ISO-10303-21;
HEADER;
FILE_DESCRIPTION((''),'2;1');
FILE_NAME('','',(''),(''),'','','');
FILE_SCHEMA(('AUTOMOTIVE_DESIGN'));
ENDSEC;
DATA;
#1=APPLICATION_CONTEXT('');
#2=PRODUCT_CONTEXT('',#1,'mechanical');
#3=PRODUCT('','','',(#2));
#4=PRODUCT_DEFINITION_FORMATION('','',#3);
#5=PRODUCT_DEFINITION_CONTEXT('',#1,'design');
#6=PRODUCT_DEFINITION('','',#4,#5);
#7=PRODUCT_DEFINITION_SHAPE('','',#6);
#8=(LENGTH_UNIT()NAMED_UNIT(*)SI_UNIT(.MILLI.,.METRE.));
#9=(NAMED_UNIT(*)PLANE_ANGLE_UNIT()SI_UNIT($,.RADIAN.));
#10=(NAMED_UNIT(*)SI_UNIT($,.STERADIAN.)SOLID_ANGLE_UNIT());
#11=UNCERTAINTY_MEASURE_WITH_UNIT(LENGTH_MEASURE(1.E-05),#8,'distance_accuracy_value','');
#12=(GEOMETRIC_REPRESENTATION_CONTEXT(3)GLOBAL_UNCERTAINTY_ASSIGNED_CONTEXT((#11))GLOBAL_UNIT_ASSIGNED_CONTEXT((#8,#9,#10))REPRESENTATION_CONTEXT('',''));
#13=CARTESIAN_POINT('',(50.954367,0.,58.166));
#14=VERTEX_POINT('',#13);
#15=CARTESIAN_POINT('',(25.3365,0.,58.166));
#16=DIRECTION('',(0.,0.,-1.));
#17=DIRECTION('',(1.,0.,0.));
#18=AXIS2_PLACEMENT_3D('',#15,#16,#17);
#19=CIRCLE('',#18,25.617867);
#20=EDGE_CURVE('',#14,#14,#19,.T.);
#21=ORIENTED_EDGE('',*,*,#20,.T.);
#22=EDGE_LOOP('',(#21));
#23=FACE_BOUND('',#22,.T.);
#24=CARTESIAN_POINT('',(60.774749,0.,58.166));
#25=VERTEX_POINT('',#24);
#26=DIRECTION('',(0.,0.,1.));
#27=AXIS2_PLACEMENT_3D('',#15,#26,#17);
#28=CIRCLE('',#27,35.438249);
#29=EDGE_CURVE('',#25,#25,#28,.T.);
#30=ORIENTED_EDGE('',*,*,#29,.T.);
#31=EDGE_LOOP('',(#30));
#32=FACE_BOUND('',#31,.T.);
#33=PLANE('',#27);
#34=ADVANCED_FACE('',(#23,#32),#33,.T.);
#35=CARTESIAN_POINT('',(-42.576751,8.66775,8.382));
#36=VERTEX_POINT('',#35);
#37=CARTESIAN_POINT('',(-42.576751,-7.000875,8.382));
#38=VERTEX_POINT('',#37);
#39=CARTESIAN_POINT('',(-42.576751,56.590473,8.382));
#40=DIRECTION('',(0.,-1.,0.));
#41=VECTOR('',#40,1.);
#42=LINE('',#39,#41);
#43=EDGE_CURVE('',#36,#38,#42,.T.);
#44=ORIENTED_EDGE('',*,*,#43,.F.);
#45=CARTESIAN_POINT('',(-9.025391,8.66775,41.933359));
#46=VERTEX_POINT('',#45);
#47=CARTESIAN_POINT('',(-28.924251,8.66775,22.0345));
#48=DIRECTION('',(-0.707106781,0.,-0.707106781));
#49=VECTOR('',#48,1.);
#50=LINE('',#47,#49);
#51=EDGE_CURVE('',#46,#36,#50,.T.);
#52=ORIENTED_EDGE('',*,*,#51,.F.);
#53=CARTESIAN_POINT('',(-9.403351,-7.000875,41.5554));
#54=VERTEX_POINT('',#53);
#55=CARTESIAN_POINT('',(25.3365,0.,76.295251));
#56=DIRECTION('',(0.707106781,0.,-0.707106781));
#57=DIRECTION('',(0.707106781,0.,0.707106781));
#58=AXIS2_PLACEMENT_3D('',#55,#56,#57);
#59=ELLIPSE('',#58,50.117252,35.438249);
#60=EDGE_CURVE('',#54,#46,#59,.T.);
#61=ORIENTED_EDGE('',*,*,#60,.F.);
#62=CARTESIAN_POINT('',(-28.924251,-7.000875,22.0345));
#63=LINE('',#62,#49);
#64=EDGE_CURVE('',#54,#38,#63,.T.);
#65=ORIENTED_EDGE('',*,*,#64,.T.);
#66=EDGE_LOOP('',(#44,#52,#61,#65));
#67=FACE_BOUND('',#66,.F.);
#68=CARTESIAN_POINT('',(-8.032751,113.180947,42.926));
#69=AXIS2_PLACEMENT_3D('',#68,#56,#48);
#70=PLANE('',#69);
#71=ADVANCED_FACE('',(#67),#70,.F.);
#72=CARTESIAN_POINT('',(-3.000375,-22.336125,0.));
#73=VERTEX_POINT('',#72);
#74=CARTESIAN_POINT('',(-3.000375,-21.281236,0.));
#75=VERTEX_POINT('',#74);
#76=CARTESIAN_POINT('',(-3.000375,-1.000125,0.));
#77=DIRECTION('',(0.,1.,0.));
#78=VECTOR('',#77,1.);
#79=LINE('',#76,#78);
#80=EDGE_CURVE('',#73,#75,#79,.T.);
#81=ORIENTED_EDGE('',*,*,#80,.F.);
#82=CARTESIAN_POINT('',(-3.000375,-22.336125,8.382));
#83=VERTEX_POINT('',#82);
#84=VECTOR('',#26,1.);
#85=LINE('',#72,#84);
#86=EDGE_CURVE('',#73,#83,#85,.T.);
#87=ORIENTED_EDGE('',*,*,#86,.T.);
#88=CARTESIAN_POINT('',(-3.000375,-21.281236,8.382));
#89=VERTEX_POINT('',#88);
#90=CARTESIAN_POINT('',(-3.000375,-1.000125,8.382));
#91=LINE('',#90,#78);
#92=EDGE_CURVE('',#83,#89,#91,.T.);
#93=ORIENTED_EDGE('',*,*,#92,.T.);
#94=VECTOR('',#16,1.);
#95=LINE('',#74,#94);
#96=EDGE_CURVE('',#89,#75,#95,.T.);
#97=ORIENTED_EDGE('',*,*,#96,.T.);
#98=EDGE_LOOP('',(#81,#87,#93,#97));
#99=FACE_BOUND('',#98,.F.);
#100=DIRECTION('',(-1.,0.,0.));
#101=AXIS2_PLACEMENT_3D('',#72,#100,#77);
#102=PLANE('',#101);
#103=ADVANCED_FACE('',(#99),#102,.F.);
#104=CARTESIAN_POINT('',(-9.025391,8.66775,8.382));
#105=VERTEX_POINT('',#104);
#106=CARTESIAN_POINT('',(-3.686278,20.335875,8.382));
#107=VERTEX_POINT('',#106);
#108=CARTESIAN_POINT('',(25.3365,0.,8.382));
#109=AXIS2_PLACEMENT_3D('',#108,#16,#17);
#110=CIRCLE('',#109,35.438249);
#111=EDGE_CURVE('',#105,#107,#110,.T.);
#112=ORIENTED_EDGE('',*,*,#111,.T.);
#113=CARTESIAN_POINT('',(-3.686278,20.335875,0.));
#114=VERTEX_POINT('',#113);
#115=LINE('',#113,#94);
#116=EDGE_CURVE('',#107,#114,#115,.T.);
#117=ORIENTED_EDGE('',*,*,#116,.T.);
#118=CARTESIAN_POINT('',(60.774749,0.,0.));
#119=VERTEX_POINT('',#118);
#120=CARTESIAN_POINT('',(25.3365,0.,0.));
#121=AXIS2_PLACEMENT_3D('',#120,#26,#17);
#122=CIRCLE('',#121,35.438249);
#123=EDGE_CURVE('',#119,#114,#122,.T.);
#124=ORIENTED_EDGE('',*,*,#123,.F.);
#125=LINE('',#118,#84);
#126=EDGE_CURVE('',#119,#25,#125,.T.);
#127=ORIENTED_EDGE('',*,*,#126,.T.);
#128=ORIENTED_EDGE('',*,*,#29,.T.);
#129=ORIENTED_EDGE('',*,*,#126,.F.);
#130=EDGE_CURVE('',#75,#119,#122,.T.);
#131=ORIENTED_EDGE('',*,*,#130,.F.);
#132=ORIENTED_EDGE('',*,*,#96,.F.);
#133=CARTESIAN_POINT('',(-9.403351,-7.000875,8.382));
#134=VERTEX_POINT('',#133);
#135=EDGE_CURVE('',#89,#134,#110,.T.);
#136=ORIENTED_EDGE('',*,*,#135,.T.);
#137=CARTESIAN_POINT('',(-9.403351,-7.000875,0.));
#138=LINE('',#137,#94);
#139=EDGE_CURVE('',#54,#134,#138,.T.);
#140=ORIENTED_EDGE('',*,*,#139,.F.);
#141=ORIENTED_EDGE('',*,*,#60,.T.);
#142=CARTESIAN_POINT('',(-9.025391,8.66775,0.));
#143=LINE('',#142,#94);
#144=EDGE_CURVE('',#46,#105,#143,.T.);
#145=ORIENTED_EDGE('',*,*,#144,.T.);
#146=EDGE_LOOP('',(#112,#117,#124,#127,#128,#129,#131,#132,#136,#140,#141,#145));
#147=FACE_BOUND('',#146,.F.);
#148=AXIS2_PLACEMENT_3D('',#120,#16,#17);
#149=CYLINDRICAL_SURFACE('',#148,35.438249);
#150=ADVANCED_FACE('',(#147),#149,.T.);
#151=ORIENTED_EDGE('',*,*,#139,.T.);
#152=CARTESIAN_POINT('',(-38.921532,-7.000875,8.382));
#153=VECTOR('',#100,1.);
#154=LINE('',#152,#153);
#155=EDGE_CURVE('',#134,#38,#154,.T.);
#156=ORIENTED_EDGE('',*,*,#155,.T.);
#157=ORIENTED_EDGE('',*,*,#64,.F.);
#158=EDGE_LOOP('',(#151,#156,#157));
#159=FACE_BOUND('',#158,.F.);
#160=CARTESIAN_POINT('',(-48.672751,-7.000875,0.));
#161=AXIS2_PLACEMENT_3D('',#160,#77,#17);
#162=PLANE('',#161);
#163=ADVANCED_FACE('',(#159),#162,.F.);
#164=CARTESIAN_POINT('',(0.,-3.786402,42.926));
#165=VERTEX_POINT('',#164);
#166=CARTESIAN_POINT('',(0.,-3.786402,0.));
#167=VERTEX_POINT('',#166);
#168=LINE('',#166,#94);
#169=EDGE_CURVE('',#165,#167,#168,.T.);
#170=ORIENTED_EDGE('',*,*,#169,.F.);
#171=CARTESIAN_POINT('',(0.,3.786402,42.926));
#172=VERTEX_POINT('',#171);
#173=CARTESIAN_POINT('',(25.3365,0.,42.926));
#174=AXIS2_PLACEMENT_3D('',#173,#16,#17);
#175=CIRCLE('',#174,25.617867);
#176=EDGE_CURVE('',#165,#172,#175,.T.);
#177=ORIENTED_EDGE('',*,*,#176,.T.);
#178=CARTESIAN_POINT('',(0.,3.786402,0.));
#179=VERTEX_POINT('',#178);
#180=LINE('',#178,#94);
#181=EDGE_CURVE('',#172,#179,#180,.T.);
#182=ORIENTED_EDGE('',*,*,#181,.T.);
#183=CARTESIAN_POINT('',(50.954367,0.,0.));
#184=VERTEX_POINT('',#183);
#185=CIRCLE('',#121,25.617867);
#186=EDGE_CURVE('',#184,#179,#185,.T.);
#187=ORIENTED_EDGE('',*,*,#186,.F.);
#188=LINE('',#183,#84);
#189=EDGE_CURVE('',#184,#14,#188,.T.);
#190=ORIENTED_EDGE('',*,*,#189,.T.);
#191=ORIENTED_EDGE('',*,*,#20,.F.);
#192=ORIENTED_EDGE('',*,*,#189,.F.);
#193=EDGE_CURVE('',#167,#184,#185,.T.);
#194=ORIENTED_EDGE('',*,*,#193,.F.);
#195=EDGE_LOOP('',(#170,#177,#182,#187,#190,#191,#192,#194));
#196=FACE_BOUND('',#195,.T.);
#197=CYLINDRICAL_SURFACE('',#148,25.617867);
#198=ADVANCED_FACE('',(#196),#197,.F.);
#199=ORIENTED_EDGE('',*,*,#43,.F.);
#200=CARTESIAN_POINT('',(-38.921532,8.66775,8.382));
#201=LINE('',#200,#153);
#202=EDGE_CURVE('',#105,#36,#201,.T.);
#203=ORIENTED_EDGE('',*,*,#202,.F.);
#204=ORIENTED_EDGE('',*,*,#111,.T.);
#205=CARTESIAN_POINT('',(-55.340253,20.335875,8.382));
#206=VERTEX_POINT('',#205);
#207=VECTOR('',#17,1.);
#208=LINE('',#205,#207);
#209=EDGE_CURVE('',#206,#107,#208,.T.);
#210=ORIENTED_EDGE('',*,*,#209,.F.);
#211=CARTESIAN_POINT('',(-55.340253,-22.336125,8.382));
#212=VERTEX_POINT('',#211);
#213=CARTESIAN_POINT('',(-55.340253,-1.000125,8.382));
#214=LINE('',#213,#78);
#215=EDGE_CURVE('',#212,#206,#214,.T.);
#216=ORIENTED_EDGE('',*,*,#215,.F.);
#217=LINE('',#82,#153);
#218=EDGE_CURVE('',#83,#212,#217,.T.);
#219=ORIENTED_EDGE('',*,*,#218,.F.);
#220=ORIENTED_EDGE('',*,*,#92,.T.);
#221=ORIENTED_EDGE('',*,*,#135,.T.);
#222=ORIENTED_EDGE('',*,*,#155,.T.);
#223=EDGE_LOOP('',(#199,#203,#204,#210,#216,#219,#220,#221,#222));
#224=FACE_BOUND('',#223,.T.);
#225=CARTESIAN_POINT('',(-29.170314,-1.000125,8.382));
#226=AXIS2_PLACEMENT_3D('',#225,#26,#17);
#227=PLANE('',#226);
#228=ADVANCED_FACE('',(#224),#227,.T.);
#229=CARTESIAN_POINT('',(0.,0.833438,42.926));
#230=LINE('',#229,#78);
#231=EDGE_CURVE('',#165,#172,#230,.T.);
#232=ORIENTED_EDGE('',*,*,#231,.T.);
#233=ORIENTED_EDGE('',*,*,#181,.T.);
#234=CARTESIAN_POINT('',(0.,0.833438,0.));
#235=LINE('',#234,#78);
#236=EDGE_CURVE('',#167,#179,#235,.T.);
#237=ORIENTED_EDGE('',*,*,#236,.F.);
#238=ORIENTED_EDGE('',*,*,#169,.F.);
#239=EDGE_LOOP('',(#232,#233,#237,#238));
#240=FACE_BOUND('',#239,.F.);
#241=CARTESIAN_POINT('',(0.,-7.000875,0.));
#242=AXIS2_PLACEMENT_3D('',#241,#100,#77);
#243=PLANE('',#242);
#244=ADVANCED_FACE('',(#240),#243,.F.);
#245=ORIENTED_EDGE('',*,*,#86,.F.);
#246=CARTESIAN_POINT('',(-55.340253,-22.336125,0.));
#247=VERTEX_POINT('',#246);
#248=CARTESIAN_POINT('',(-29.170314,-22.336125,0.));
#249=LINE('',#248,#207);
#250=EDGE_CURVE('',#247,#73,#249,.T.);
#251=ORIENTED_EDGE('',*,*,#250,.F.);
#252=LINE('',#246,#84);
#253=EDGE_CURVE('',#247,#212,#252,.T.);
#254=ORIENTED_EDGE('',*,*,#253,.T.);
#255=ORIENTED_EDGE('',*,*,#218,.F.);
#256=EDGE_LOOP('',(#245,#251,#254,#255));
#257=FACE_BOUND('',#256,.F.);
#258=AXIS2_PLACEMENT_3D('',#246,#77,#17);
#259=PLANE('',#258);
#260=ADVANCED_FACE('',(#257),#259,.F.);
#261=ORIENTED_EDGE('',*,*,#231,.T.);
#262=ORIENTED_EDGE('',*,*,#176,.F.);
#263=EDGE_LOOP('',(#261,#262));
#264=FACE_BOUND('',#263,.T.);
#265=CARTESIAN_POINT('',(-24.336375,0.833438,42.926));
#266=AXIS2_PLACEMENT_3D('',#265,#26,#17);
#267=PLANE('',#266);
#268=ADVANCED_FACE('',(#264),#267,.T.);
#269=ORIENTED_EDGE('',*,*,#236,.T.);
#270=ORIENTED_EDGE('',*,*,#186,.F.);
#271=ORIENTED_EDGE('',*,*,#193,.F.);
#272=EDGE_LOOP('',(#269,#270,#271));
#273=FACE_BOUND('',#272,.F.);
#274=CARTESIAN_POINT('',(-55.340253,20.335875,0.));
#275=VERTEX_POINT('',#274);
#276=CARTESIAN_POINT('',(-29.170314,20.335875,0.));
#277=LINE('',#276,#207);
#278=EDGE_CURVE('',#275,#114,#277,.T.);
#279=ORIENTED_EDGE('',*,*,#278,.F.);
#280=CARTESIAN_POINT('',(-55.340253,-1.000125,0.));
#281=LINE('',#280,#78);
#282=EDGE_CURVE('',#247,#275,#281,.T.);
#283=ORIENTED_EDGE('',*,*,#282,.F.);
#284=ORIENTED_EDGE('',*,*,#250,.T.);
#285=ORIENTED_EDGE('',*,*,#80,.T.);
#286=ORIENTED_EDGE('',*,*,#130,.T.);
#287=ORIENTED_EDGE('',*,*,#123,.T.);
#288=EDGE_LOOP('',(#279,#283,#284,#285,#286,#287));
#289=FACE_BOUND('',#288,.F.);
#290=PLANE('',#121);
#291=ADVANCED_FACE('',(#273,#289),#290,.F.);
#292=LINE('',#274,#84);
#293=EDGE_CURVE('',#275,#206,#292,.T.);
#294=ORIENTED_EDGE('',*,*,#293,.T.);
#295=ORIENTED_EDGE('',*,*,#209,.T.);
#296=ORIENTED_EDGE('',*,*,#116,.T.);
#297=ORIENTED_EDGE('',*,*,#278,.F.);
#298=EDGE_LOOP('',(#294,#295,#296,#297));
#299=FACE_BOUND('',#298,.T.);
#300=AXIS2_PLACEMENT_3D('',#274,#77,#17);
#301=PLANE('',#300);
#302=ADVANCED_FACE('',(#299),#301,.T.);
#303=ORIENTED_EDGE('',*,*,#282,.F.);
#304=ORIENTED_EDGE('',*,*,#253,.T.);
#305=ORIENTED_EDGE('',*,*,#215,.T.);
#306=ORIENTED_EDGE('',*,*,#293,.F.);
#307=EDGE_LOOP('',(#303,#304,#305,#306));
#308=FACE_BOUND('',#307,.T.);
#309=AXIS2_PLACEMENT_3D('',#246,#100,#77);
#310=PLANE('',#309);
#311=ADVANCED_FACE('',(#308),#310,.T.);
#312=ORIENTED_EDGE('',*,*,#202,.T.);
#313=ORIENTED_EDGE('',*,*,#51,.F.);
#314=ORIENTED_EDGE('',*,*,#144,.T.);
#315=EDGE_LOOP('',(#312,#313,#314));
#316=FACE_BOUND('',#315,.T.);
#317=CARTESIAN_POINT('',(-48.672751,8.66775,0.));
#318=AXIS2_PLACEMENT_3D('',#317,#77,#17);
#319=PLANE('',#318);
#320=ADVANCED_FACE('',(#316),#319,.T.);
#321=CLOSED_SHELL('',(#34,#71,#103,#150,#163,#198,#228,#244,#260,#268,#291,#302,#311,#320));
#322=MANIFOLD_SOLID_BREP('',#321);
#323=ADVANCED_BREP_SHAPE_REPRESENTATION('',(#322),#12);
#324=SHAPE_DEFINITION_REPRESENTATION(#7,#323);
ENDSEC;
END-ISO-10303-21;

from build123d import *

# Parameters (mm, degrees)
F0_W        = 52.3398779333
F0_H        = 42.6720008254
F1_DEPTH    = 8.382
F2_R        = 35.438248993
F3_DEPTH    = 58.166
F4_R        = 25.617866598
F5_DEPTH    = 76.454
F6_W        = 48.6727505922
F6_H        = 15.6686254777
F7_DEPTH    = 42.926
F8_T4_DEPTH = 224.6950187396
F8_S5_R     = 35.438248993
F8_T6_DEPTH = 117


# Not quite as in the source:
# - a fillet or chamfer that OpenCascade refuses, or shapes differently, is made with other operations: its cross-section is extruded or revolved along the edge and cut away or added


with BuildPart() as f1:
    # F0 (on Top) → F1 (new body)
    with BuildSketch(Plane.XY):
        with Locations((-29.17031385, -1.0001249611)):
            Rectangle(F0_W, F0_H)
    extrude(amount=F1_DEPTH)

    # F2 (on Top) → F3 (join)
    with BuildSketch(Plane.XY):
        with Locations((25.3365002573, 0)):
            Circle(F2_R)
    extrude(amount=F3_DEPTH)

    # F4 (on Top) → F5 (cut)
    with BuildSketch(Plane.XY):
        with Locations((25.3365002573, 0)):
            Circle(F4_R)
    extrude(amount=F5_DEPTH, mode=Mode.SUBTRACT)

    # F6 (on Top) → F7 (join)
    with BuildSketch(Plane.XY):
        with Locations((-24.3363752961, 0.8334375452)):
            Rectangle(F6_W, F6_H)
    extrude(amount=F7_DEPTH)

    # F8: chamfer of 40.64 on 1 edges, made by hand


with BuildPart() as f8_tool2:
    # F8_s3 → F8_t4 (new body)
    with BuildSketch(Plane.XZ.offset(-113.180946915)):
        Polygon((-8.0327505922, 42.926), (-48.6727505922, 2.286), (-48.6727505922, 42.926), align=None)
    extrude(amount=F8_T4_DEPTH)

    # F8_s5 → F8_t6 (cut, symmetric)
    with BuildSketch(Plane.XY.offset(22.6)):
        with Locations((25.3365002573, 0)):
            Circle(F8_S5_R)
    extrude(amount=F8_T6_DEPTH, both=True, mode=Mode.SUBTRACT)

    split(bisect_by=Plane.XY.offset(8.382), keep=Keep.TOP)


with BuildPart() as f1_1:
    add(f1.part)

    # F8_t1: cut F8_tool2
    add(f8_tool2.part, mode=Mode.SUBTRACT)


solid = f1_1.part
